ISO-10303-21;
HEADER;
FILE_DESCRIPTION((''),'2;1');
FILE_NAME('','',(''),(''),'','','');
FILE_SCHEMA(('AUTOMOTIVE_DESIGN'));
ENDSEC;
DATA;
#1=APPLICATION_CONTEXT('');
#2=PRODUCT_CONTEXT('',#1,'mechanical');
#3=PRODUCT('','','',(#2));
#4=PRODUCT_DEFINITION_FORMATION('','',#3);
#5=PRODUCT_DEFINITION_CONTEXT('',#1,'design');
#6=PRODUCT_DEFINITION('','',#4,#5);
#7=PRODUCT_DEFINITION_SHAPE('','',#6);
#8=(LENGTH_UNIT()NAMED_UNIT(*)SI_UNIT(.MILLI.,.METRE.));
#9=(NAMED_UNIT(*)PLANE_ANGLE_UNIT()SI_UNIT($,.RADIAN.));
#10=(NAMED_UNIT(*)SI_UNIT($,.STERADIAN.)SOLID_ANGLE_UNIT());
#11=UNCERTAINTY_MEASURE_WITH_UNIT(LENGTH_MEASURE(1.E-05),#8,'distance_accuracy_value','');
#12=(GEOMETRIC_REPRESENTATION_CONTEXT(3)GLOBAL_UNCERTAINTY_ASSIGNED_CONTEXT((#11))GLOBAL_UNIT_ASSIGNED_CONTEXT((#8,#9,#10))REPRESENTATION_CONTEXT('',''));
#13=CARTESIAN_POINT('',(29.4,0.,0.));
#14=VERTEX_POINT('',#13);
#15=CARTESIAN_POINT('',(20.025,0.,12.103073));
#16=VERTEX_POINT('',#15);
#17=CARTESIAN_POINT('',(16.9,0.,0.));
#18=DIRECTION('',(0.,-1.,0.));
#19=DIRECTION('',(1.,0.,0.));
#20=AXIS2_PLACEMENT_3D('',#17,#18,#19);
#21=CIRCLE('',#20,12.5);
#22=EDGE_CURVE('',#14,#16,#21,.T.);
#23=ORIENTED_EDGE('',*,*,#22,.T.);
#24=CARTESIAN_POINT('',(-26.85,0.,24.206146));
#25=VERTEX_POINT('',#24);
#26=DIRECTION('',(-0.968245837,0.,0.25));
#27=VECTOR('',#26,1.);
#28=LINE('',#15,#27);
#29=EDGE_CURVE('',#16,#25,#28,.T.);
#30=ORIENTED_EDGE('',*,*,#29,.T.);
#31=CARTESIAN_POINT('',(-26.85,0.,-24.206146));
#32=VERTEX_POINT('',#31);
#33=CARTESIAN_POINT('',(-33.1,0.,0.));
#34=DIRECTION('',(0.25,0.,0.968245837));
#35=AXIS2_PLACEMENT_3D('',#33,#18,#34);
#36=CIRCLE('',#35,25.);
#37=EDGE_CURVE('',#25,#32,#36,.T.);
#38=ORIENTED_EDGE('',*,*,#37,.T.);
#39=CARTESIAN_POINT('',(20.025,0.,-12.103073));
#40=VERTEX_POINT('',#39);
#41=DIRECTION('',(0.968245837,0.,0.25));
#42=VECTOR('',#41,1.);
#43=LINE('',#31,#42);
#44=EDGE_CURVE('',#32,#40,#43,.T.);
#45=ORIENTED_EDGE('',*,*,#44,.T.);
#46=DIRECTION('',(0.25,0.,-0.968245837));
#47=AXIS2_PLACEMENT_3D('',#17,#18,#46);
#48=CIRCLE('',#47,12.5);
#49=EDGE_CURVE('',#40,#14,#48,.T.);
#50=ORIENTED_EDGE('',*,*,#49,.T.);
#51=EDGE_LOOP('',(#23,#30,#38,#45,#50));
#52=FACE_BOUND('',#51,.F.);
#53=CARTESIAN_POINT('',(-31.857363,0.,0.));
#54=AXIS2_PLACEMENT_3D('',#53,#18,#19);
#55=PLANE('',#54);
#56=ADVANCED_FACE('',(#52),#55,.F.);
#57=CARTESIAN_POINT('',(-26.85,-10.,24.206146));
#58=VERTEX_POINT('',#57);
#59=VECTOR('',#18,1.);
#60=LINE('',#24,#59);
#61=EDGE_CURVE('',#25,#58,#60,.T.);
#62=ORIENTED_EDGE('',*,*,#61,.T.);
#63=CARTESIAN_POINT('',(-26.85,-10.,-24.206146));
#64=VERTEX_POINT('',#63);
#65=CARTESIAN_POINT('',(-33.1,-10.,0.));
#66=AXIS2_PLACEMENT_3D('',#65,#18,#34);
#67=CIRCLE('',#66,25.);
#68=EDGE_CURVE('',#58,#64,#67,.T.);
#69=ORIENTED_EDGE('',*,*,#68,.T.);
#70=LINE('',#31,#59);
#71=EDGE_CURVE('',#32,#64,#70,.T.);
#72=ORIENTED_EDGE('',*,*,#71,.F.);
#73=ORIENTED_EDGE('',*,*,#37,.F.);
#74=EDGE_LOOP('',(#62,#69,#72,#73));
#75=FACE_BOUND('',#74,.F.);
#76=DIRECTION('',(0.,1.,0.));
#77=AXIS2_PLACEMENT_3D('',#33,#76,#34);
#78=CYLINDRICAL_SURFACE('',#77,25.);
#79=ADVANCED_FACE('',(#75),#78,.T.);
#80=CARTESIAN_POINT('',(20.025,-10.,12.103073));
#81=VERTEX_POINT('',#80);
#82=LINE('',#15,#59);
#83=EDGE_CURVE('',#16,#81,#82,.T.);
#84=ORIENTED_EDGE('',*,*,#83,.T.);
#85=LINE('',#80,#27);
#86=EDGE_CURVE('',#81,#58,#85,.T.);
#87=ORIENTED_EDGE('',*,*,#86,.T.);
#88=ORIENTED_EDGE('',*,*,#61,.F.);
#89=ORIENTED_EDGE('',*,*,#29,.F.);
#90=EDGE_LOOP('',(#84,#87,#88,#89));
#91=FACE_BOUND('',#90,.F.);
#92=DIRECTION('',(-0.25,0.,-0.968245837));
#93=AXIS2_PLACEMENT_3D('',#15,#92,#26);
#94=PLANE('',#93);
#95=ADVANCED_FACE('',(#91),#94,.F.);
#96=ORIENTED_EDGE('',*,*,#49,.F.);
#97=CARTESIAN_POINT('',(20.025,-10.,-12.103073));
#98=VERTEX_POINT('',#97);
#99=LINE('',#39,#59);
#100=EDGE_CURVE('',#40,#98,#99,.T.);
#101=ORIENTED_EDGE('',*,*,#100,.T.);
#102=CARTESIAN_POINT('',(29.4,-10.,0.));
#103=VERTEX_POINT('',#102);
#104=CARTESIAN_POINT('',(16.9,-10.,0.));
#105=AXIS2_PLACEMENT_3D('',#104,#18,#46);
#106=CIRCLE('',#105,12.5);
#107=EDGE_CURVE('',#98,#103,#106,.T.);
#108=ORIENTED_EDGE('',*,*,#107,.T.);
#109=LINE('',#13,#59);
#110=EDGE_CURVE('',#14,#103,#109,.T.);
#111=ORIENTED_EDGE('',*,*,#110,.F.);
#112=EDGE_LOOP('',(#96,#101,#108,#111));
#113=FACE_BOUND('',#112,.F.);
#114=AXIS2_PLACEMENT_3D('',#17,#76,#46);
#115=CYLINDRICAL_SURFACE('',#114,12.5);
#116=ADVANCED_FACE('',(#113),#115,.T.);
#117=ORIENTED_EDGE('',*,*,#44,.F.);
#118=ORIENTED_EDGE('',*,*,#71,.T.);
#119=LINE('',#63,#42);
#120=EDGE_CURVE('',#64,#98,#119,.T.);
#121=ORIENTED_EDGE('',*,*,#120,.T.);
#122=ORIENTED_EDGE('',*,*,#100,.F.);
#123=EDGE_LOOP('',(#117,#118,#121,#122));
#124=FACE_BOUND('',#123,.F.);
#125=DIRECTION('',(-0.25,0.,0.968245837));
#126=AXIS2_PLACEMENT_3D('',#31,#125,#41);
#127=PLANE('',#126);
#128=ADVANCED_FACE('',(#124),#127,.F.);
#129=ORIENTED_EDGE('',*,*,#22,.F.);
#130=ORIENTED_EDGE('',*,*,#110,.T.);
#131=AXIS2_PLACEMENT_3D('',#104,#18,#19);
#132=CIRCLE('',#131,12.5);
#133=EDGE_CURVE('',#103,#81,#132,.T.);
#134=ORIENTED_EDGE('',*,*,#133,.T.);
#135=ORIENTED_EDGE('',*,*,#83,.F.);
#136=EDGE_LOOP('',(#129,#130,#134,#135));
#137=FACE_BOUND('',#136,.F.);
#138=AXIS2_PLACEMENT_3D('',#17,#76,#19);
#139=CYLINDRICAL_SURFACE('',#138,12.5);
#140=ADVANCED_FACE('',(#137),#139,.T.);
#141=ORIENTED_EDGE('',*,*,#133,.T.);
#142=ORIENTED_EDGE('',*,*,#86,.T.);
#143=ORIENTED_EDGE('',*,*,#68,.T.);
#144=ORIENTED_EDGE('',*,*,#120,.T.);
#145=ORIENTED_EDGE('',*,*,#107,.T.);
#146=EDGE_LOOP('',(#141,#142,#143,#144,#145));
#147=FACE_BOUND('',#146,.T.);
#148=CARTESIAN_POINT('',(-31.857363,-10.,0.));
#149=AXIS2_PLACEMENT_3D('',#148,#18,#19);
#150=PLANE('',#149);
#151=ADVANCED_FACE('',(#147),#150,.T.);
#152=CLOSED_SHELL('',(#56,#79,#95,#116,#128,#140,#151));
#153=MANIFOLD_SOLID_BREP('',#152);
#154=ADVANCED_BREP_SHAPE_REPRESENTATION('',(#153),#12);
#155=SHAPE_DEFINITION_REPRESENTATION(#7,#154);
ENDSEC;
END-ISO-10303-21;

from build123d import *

# Parameters (mm, degrees)
F1_DEPTH = 10


# Not quite as in the source:
# - the program builds the solid bodies; features that only make, move or delete a surface that nothing else refers to are left out


with BuildPart() as f1:
    # F0 (on Front) → F1 (new body)
    with BuildSketch(Plane.XZ):
        with BuildLine():
            ThreePointArc((-8.1000001146, 0), (-13.3357647385, 15.3093108924), (-26.8500001146, 24.2061459138))
            ThreePointArc((-26.8500001146, 24.2061459138), (-58.1000001146, 0), (-26.8500001146, -24.2061459138))
            ThreePointArc((-26.8500001146, -24.2061459138), (-13.3357647385, -15.3093108924), (-8.1000001146, 0))
        make_face()
        with BuildLine():
            Line((20.0249998854, 12.1030729569), (-26.8500001146, 24.2061459138))
            ThreePointArc((-26.8500001146, 24.2061459138), (-13.3357647385, 15.3093108924), (-8.1000001146, 0))
            ThreePointArc((-8.1000001146, 0), (-13.3357647385, -15.3093108924), (-26.8500001146, -24.2061459138))
            Line((-26.8500001146, -24.2061459138), (20.0249998854, -12.1030729569))
            ThreePointArc((20.0249998854, -12.1030729569), (4.3999998854, 0), (20.0249998854, 12.1030729569))
        make_face()
        with BuildLine():
            ThreePointArc((29.3999998854, 0), (26.7821175735, 7.6546554462), (20.0249998854, 12.1030729569))
            ThreePointArc((20.0249998854, 12.1030729569), (4.3999998854, 0), (20.0249998854, -12.1030729569))
            ThreePointArc((20.0249998854, -12.1030729569), (26.7821175735, -7.6546554462), (29.3999998854, 0))
        make_face()
    extrude(amount=F1_DEPTH)


solid = f1.part
